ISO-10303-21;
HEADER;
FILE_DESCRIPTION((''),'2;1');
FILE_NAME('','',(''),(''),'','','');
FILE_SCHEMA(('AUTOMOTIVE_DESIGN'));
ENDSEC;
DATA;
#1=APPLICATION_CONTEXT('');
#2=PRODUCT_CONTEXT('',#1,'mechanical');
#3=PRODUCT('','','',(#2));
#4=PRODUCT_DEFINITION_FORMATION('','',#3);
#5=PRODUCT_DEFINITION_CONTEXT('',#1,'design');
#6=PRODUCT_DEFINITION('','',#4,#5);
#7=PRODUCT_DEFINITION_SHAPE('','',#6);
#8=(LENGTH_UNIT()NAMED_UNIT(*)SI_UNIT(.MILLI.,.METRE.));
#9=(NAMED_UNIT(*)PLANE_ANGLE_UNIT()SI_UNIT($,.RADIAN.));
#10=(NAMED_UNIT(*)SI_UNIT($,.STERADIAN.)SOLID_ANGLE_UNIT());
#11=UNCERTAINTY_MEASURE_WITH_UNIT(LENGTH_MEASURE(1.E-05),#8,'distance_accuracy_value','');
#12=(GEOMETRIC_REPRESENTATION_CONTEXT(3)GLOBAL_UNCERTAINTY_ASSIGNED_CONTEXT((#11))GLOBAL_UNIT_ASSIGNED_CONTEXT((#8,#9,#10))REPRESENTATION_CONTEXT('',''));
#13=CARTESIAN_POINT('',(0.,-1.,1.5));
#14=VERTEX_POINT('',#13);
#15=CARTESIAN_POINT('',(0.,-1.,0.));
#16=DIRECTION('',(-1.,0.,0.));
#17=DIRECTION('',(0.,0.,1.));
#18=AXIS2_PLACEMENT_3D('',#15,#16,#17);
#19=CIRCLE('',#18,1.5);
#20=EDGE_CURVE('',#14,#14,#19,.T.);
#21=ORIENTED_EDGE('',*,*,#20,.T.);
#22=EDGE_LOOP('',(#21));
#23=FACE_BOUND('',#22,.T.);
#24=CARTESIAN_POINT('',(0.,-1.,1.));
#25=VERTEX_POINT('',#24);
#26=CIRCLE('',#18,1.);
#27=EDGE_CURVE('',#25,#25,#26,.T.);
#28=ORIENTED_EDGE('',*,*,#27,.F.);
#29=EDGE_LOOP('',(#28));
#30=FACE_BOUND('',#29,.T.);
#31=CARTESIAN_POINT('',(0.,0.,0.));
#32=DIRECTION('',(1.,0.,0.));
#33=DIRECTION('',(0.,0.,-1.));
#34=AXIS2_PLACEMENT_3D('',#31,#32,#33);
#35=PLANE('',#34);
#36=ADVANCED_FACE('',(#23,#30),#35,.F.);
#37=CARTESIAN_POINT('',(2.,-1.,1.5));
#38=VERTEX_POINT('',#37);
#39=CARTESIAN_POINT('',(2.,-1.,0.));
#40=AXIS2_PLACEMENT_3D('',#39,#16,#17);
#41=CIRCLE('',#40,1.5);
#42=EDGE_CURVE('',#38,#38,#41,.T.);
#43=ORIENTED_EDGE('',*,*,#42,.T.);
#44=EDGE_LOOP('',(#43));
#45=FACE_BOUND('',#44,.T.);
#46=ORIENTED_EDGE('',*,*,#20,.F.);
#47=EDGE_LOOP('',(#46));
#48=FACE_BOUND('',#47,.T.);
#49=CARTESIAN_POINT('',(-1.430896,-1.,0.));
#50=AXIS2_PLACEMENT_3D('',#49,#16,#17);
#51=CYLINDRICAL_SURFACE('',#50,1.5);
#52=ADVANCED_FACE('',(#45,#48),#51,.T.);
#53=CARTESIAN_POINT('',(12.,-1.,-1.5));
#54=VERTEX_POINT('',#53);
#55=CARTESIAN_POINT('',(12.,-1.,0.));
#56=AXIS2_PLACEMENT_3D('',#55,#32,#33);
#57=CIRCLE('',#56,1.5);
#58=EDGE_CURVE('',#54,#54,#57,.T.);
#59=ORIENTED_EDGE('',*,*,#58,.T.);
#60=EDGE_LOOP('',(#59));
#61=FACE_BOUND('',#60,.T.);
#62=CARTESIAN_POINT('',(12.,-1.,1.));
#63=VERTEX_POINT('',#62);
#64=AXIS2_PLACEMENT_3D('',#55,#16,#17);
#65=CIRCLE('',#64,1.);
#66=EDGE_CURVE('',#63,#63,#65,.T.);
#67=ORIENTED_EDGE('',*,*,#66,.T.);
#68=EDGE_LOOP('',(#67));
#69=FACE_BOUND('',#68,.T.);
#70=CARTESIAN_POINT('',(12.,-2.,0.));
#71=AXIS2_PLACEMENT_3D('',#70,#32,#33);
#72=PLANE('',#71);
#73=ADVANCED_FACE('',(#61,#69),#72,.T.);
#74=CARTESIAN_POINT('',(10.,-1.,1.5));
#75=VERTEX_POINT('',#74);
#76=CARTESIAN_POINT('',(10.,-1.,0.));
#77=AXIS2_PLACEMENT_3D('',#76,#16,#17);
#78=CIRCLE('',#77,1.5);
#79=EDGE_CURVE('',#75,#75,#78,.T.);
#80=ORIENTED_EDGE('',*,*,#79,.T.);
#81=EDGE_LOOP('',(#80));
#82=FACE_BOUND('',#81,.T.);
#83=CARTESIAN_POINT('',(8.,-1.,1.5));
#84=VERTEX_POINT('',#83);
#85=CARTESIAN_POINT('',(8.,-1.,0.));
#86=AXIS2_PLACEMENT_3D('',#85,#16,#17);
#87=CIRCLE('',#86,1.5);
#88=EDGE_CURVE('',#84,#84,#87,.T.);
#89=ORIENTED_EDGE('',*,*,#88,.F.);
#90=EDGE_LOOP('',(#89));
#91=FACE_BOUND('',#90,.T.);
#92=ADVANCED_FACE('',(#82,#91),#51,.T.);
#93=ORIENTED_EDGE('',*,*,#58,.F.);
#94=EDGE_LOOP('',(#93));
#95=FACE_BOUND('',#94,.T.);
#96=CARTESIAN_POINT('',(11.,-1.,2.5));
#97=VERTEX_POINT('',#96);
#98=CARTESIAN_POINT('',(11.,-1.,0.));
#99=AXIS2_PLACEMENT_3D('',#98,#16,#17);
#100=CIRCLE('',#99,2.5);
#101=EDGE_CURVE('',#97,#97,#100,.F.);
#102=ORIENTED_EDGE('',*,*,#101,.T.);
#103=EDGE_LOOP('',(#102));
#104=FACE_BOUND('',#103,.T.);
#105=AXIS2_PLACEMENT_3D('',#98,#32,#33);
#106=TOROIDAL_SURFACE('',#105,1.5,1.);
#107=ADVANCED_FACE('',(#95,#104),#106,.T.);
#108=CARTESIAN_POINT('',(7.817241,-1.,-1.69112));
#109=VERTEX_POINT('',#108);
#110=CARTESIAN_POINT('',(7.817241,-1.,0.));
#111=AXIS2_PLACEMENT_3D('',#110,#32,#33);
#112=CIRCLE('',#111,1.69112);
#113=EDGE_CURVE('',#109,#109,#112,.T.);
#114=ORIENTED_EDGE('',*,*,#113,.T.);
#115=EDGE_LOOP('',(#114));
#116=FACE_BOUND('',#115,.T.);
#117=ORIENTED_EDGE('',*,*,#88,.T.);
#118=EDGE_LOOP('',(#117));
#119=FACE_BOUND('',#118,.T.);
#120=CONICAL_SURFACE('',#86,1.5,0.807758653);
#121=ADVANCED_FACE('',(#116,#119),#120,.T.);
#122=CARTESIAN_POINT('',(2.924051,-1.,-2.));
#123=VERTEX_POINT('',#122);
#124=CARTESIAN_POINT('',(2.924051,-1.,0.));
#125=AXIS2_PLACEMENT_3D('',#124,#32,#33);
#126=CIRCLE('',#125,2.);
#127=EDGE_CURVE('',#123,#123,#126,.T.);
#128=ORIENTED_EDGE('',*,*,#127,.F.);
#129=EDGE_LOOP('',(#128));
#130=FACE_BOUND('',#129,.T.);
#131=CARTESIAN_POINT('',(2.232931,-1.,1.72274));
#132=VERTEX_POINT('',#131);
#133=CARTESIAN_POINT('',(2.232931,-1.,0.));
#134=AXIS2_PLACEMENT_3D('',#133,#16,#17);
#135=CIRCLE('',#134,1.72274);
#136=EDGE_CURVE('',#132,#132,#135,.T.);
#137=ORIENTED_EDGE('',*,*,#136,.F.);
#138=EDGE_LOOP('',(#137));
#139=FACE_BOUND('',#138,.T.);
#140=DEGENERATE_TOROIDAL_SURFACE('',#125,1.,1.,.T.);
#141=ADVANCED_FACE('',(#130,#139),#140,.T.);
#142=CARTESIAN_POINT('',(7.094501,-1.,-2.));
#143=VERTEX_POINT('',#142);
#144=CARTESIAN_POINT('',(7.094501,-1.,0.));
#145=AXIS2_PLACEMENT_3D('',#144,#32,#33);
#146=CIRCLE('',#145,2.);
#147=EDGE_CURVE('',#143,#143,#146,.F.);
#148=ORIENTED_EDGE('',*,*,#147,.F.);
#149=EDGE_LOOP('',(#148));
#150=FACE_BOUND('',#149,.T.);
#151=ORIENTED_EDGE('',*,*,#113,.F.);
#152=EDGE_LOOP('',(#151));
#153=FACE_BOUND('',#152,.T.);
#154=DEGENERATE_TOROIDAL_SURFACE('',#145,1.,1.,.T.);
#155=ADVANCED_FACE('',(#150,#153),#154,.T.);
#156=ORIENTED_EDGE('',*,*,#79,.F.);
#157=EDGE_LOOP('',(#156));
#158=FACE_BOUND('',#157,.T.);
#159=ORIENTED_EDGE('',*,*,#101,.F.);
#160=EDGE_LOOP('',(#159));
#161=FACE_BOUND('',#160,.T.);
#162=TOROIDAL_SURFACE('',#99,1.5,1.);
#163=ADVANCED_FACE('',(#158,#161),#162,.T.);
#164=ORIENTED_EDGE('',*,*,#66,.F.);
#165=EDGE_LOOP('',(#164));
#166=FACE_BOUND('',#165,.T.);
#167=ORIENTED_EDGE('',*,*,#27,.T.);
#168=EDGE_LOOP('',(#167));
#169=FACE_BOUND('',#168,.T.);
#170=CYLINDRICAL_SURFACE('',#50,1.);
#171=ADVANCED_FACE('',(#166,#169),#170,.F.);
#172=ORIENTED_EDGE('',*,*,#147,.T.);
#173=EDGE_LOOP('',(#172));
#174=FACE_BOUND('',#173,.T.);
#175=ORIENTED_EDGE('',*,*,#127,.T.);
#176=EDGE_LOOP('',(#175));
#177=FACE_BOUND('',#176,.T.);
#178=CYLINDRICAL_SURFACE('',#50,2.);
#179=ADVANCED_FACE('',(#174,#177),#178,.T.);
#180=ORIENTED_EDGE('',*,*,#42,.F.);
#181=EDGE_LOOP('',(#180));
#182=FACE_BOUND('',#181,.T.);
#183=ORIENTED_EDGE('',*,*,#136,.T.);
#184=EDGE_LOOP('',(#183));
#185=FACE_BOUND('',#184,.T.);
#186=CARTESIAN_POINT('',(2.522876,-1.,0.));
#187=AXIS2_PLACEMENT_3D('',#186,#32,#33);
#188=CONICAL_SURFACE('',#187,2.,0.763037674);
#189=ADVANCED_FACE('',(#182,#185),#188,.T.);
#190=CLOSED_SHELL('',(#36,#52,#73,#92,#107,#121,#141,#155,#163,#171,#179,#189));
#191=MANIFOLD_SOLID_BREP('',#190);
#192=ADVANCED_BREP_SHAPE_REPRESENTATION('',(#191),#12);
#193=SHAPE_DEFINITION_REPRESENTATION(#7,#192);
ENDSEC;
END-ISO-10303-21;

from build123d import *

# Parameters (mm, degrees)
SKETCH2_W = 2
SKETCH2_H = 1.5
FILLET1_R = 1
FILLET2_R = 1


with BuildPart() as part:
    # Sketch1 → Revolve1 (revolve)
    with BuildSketch(Plane.XY, mode=Mode.PRIVATE) as revolve1_sk:
        Polygon((0, 0), (10, 0), (10, 0.5), (8, 0.5), (7.521875, 1), (2.522875817, 1), (2, 0.5), (0, 0.5), align=None)
    revolve(revolve1_sk.sketch.rotate(Axis((-1.430896147, -1, 0), (1, 0, 0)), 90), axis=Axis((-1.430896147, -1, 0), (1, 0, 0)))

    # Sketch2 → Revolve2 (revolve)
    with BuildSketch(Plane.XY, mode=Mode.PRIVATE) as revolve2_sk:
        with Locations((11, -2.75)):
            Rectangle(SKETCH2_W, SKETCH2_H)
    revolve(revolve2_sk.sketch.rotate(Axis((10, -1, 0), (1, 0, 0)), 270), axis=Axis((10, -1, 0), (1, 0, 0)))

    # Fillet1
    fillet1_edges = [part.edges().sort_by_distance(p)[0] for p in [
        (2.522875817, -1, -2),
        (7.521875, -1, -2),
    ]]
    fillet(fillet1_edges, radius=FILLET1_R)

    # Fillet2
    fillet2_edges = [part.edges().sort_by_distance(p)[0] for p in [
        (12, -1, -2.5),
        (10, -1, -2.5),
    ]]
    fillet(fillet2_edges, radius=FILLET2_R - 0.0001)  # a hair under: the kernel refuses the full size


solid = part.part
